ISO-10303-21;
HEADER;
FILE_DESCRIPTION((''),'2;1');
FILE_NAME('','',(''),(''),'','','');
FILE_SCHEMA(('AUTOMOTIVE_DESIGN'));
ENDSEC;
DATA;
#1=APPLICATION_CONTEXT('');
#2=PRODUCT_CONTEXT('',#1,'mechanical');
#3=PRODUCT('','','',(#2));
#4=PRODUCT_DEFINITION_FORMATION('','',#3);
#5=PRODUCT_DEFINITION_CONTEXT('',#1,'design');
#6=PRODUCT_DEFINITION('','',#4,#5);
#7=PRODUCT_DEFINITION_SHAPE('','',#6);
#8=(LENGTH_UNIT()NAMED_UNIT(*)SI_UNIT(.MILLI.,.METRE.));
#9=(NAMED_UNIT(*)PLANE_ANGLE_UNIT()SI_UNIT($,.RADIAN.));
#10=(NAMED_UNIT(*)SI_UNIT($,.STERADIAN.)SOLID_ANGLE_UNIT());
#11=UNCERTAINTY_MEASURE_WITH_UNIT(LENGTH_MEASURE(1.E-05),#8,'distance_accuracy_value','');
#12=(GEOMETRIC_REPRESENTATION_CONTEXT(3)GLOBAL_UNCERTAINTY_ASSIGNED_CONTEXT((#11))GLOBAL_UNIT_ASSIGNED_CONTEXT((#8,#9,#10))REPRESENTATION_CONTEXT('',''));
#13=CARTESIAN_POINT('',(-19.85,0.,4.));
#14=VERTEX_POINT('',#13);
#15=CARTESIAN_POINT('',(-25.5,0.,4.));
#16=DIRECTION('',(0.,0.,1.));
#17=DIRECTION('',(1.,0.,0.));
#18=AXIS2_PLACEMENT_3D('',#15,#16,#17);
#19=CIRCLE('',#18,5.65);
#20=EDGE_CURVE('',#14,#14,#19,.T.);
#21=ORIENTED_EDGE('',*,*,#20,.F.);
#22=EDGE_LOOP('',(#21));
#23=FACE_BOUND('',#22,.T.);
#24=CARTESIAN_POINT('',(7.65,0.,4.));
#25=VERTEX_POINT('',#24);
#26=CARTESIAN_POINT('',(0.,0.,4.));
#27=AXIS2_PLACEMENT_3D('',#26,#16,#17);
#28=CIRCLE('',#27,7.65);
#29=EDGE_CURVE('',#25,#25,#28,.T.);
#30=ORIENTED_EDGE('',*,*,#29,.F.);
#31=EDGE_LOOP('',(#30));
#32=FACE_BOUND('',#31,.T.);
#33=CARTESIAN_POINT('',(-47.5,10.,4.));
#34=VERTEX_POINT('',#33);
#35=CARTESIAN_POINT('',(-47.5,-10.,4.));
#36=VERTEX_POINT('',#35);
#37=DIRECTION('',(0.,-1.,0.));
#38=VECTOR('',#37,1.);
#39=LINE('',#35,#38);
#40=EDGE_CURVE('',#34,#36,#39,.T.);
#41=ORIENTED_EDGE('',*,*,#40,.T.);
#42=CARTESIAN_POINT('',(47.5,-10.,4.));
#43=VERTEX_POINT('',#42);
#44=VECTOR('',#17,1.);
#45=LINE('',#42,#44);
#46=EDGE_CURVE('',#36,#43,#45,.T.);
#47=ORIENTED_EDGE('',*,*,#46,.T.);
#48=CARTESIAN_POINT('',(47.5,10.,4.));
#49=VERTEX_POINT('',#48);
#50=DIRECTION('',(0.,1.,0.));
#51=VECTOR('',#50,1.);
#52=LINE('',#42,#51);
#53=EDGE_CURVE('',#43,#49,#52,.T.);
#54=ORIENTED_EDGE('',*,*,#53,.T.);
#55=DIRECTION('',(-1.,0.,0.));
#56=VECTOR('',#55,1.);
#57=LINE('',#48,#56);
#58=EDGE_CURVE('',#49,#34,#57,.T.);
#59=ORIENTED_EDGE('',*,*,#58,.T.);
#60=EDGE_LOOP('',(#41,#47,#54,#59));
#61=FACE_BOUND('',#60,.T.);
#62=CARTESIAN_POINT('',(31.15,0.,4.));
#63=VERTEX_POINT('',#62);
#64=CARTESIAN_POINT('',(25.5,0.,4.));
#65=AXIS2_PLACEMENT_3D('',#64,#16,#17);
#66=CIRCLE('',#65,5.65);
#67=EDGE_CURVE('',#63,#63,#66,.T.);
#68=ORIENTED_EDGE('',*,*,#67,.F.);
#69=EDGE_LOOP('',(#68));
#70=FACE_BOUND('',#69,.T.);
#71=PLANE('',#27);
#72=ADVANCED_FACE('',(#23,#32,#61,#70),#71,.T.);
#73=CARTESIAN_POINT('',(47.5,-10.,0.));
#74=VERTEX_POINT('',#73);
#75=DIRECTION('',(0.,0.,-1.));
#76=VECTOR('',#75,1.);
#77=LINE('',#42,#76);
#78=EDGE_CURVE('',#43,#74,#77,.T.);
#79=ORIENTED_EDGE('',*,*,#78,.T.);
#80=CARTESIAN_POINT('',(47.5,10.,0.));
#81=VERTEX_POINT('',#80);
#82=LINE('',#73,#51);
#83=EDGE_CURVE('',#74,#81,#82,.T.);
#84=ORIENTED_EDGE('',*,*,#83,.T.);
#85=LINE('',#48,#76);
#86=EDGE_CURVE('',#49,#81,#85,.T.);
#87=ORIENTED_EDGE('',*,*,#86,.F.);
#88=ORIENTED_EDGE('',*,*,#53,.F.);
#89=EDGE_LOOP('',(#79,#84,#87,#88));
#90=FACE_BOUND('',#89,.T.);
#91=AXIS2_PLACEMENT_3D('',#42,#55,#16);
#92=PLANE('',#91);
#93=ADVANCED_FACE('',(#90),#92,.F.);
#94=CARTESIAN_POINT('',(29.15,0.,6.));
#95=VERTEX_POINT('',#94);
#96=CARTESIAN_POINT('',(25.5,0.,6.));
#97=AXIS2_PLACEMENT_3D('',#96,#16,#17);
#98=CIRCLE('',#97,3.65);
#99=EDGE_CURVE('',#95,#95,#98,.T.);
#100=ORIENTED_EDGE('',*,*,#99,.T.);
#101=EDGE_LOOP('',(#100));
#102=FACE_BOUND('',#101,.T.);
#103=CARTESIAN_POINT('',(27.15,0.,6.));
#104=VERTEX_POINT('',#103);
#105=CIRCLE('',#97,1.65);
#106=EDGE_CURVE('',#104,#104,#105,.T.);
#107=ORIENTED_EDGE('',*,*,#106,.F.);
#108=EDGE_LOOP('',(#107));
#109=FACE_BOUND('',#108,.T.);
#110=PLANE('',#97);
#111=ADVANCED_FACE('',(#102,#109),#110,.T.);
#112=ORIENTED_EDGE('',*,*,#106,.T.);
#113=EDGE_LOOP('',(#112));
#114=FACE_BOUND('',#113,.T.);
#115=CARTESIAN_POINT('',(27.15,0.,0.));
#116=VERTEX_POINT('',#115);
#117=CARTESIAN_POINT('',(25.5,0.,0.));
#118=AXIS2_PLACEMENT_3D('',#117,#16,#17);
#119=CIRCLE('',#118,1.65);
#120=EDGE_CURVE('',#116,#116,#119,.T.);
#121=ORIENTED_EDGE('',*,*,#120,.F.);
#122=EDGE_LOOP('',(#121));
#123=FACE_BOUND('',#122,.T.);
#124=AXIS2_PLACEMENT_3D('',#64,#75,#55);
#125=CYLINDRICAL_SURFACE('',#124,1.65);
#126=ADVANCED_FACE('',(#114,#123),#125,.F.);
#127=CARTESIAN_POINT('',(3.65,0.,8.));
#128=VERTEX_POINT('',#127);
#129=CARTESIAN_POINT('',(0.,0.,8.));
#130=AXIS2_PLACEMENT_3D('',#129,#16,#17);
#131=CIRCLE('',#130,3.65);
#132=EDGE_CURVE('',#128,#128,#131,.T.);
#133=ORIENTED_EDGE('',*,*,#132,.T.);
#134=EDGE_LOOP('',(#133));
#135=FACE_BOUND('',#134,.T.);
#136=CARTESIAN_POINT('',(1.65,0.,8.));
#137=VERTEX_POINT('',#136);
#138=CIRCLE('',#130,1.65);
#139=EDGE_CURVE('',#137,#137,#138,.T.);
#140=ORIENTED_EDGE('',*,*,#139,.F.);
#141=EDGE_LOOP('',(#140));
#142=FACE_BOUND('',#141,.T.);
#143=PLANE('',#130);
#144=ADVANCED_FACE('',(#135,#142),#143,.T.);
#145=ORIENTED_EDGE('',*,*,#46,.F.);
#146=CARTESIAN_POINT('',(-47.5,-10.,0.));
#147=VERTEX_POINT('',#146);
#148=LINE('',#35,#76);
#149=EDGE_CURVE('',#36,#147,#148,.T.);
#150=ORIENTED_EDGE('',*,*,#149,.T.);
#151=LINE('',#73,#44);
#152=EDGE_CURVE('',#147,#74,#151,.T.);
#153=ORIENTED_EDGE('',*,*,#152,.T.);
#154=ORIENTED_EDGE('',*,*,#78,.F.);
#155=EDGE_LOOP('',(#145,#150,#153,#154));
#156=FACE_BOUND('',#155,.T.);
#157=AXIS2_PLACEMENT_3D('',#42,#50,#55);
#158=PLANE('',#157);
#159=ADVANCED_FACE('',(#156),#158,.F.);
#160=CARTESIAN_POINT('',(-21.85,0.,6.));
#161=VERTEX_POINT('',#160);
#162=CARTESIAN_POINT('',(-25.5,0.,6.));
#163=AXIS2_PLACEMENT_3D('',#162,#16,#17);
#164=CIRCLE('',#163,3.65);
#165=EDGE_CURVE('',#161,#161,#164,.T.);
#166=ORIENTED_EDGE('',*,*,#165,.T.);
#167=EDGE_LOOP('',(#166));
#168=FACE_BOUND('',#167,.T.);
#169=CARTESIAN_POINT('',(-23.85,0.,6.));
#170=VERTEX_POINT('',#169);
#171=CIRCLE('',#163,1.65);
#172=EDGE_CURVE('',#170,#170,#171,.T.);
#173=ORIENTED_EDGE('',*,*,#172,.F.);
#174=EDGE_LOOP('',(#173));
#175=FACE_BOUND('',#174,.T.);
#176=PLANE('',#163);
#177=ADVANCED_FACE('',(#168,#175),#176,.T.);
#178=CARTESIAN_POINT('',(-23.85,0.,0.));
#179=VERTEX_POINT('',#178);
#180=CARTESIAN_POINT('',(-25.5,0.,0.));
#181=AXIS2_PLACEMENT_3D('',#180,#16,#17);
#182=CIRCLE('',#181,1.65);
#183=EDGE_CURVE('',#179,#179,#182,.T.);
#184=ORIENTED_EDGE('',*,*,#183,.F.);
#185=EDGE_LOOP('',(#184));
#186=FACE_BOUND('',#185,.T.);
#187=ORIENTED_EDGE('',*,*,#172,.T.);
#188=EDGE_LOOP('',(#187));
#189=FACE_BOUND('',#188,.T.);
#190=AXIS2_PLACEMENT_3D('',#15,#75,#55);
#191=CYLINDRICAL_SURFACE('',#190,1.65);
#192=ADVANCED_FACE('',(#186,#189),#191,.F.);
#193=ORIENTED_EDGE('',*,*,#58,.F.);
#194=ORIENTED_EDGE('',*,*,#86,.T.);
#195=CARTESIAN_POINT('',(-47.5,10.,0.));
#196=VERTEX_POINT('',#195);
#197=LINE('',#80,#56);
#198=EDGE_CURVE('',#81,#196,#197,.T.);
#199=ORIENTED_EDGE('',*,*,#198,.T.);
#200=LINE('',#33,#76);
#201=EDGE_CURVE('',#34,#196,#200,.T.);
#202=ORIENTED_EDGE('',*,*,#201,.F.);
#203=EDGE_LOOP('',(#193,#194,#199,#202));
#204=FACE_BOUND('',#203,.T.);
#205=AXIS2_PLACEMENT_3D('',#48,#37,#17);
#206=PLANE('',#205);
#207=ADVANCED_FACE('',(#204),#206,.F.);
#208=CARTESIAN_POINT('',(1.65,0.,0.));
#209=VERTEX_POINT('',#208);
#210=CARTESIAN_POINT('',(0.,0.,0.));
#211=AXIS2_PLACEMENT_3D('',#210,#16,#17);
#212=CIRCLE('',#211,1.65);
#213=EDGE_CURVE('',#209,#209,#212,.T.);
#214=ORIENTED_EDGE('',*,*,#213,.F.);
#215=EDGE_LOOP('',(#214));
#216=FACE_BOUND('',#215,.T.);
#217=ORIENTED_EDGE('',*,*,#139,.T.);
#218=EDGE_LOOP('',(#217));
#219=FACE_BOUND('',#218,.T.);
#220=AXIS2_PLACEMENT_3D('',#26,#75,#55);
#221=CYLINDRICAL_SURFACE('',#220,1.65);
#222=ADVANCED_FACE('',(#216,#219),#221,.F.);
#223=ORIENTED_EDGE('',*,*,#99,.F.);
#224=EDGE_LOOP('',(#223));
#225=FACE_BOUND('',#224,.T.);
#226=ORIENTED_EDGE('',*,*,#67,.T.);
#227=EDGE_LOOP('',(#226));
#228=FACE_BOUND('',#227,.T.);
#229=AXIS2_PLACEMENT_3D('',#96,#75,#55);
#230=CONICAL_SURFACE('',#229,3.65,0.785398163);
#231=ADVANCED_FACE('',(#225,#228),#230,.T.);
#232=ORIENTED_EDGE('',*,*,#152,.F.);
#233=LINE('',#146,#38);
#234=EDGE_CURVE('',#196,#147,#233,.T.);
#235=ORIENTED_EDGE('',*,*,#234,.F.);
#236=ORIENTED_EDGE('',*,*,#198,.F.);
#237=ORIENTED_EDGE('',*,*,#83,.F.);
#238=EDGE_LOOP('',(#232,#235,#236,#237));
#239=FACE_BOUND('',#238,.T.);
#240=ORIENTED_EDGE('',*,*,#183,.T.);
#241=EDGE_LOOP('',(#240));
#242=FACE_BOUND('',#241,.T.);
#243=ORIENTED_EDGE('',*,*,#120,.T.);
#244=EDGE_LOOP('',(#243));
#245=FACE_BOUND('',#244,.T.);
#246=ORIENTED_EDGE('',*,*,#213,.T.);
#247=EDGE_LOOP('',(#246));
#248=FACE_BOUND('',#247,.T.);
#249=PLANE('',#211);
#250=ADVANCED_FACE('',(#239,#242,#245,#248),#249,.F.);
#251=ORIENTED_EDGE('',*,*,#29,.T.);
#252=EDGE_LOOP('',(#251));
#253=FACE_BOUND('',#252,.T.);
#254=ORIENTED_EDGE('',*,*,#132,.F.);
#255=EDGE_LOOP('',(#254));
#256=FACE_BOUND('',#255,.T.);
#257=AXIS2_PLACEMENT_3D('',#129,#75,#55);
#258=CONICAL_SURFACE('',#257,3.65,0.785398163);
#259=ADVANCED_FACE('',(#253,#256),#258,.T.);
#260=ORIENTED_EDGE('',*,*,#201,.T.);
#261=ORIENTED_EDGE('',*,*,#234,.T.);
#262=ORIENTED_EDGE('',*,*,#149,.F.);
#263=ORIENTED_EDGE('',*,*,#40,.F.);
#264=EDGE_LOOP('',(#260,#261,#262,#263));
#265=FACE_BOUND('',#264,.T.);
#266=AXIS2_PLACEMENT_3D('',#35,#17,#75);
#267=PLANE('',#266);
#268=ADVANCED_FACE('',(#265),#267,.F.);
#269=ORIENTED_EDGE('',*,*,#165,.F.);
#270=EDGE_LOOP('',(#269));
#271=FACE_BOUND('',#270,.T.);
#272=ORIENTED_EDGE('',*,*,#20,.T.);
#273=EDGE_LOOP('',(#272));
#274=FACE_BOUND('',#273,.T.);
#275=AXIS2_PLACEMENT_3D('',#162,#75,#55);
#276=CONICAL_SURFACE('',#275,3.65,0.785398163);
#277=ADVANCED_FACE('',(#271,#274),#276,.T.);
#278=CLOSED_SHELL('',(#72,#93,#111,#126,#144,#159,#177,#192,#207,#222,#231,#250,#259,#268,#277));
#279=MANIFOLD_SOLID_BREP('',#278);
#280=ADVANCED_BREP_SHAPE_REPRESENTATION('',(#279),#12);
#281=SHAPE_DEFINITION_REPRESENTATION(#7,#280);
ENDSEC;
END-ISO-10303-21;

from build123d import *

# Parameters (mm, degrees)
SKETCH1_W           = 95
SKETCH1_H           = 20
SKETCH1_R           = 1.65
BOSS_EXTRUDE1_DEPTH = 4
SKETCH2_R           = 5.65
SKETCH2_R_2         = 1.65
EXTRUDE_THIN1_DEPTH = 2
CHAMFER1_SIZE       = 2
SKETCH3_R           = 7.65
SKETCH3_R_2         = 1.65
EXTRUDE_THIN2_DEPTH = 4
CHAMFER2_SIZE       = 4


with BuildPart() as part:
    # Sketch1 → Boss-Extrude1 (new body)
    with BuildSketch(Plane.XY):
        Rectangle(SKETCH1_W, SKETCH1_H)
        Circle(SKETCH1_R, mode=Mode.SUBTRACT)
        with Locations((25.5, 0)):
            Circle(SKETCH1_R, mode=Mode.SUBTRACT)
        with Locations((-25.5, 0)):
            Circle(SKETCH1_R, mode=Mode.SUBTRACT)
    extrude(amount=BOSS_EXTRUDE1_DEPTH)

    # Sketch2 → Extrude-Thin1 (add)
    # profile 1 of 2: a face of its own
    with BuildSketch(Plane.XY.offset(4)):
        with Locations((-25.5, 0)):
            Circle(SKETCH2_R)
        with Locations((-25.5, 0)):
            Circle(SKETCH2_R_2, mode=Mode.SUBTRACT)
    # profile 2 of 2: a face of its own
    with BuildSketch(Plane.XY.offset(4)):
        with Locations((25.5, 0)):
            Circle(SKETCH2_R)
        with Locations((25.5, 0)):
            Circle(SKETCH2_R_2, mode=Mode.SUBTRACT)
    extrude(amount=EXTRUDE_THIN1_DEPTH)

    # Chamfer1
    chamfer1_edges = [part.edges().sort_by_distance(p)[0] for p in [
        (-31.15, 0, 6),
        (19.85, 0, 6),
    ]]
    chamfer(chamfer1_edges, length=CHAMFER1_SIZE - 0.0001)  # a hair under: the kernel refuses the full size

    # Sketch3 → Extrude-Thin2 (add)
    with BuildSketch(Plane.XY.offset(4)):
        Circle(SKETCH3_R)
        Circle(SKETCH3_R_2, mode=Mode.SUBTRACT)
    extrude(amount=EXTRUDE_THIN2_DEPTH)

    # Chamfer2
    chamfer2_edges = [part.edges().sort_by_distance(p)[0] for p in [
        (-7.65, 0, 8),
    ]]
    chamfer(chamfer2_edges, length=CHAMFER2_SIZE - 0.0001)  # a hair under: the kernel refuses the full size


solid = part.part
